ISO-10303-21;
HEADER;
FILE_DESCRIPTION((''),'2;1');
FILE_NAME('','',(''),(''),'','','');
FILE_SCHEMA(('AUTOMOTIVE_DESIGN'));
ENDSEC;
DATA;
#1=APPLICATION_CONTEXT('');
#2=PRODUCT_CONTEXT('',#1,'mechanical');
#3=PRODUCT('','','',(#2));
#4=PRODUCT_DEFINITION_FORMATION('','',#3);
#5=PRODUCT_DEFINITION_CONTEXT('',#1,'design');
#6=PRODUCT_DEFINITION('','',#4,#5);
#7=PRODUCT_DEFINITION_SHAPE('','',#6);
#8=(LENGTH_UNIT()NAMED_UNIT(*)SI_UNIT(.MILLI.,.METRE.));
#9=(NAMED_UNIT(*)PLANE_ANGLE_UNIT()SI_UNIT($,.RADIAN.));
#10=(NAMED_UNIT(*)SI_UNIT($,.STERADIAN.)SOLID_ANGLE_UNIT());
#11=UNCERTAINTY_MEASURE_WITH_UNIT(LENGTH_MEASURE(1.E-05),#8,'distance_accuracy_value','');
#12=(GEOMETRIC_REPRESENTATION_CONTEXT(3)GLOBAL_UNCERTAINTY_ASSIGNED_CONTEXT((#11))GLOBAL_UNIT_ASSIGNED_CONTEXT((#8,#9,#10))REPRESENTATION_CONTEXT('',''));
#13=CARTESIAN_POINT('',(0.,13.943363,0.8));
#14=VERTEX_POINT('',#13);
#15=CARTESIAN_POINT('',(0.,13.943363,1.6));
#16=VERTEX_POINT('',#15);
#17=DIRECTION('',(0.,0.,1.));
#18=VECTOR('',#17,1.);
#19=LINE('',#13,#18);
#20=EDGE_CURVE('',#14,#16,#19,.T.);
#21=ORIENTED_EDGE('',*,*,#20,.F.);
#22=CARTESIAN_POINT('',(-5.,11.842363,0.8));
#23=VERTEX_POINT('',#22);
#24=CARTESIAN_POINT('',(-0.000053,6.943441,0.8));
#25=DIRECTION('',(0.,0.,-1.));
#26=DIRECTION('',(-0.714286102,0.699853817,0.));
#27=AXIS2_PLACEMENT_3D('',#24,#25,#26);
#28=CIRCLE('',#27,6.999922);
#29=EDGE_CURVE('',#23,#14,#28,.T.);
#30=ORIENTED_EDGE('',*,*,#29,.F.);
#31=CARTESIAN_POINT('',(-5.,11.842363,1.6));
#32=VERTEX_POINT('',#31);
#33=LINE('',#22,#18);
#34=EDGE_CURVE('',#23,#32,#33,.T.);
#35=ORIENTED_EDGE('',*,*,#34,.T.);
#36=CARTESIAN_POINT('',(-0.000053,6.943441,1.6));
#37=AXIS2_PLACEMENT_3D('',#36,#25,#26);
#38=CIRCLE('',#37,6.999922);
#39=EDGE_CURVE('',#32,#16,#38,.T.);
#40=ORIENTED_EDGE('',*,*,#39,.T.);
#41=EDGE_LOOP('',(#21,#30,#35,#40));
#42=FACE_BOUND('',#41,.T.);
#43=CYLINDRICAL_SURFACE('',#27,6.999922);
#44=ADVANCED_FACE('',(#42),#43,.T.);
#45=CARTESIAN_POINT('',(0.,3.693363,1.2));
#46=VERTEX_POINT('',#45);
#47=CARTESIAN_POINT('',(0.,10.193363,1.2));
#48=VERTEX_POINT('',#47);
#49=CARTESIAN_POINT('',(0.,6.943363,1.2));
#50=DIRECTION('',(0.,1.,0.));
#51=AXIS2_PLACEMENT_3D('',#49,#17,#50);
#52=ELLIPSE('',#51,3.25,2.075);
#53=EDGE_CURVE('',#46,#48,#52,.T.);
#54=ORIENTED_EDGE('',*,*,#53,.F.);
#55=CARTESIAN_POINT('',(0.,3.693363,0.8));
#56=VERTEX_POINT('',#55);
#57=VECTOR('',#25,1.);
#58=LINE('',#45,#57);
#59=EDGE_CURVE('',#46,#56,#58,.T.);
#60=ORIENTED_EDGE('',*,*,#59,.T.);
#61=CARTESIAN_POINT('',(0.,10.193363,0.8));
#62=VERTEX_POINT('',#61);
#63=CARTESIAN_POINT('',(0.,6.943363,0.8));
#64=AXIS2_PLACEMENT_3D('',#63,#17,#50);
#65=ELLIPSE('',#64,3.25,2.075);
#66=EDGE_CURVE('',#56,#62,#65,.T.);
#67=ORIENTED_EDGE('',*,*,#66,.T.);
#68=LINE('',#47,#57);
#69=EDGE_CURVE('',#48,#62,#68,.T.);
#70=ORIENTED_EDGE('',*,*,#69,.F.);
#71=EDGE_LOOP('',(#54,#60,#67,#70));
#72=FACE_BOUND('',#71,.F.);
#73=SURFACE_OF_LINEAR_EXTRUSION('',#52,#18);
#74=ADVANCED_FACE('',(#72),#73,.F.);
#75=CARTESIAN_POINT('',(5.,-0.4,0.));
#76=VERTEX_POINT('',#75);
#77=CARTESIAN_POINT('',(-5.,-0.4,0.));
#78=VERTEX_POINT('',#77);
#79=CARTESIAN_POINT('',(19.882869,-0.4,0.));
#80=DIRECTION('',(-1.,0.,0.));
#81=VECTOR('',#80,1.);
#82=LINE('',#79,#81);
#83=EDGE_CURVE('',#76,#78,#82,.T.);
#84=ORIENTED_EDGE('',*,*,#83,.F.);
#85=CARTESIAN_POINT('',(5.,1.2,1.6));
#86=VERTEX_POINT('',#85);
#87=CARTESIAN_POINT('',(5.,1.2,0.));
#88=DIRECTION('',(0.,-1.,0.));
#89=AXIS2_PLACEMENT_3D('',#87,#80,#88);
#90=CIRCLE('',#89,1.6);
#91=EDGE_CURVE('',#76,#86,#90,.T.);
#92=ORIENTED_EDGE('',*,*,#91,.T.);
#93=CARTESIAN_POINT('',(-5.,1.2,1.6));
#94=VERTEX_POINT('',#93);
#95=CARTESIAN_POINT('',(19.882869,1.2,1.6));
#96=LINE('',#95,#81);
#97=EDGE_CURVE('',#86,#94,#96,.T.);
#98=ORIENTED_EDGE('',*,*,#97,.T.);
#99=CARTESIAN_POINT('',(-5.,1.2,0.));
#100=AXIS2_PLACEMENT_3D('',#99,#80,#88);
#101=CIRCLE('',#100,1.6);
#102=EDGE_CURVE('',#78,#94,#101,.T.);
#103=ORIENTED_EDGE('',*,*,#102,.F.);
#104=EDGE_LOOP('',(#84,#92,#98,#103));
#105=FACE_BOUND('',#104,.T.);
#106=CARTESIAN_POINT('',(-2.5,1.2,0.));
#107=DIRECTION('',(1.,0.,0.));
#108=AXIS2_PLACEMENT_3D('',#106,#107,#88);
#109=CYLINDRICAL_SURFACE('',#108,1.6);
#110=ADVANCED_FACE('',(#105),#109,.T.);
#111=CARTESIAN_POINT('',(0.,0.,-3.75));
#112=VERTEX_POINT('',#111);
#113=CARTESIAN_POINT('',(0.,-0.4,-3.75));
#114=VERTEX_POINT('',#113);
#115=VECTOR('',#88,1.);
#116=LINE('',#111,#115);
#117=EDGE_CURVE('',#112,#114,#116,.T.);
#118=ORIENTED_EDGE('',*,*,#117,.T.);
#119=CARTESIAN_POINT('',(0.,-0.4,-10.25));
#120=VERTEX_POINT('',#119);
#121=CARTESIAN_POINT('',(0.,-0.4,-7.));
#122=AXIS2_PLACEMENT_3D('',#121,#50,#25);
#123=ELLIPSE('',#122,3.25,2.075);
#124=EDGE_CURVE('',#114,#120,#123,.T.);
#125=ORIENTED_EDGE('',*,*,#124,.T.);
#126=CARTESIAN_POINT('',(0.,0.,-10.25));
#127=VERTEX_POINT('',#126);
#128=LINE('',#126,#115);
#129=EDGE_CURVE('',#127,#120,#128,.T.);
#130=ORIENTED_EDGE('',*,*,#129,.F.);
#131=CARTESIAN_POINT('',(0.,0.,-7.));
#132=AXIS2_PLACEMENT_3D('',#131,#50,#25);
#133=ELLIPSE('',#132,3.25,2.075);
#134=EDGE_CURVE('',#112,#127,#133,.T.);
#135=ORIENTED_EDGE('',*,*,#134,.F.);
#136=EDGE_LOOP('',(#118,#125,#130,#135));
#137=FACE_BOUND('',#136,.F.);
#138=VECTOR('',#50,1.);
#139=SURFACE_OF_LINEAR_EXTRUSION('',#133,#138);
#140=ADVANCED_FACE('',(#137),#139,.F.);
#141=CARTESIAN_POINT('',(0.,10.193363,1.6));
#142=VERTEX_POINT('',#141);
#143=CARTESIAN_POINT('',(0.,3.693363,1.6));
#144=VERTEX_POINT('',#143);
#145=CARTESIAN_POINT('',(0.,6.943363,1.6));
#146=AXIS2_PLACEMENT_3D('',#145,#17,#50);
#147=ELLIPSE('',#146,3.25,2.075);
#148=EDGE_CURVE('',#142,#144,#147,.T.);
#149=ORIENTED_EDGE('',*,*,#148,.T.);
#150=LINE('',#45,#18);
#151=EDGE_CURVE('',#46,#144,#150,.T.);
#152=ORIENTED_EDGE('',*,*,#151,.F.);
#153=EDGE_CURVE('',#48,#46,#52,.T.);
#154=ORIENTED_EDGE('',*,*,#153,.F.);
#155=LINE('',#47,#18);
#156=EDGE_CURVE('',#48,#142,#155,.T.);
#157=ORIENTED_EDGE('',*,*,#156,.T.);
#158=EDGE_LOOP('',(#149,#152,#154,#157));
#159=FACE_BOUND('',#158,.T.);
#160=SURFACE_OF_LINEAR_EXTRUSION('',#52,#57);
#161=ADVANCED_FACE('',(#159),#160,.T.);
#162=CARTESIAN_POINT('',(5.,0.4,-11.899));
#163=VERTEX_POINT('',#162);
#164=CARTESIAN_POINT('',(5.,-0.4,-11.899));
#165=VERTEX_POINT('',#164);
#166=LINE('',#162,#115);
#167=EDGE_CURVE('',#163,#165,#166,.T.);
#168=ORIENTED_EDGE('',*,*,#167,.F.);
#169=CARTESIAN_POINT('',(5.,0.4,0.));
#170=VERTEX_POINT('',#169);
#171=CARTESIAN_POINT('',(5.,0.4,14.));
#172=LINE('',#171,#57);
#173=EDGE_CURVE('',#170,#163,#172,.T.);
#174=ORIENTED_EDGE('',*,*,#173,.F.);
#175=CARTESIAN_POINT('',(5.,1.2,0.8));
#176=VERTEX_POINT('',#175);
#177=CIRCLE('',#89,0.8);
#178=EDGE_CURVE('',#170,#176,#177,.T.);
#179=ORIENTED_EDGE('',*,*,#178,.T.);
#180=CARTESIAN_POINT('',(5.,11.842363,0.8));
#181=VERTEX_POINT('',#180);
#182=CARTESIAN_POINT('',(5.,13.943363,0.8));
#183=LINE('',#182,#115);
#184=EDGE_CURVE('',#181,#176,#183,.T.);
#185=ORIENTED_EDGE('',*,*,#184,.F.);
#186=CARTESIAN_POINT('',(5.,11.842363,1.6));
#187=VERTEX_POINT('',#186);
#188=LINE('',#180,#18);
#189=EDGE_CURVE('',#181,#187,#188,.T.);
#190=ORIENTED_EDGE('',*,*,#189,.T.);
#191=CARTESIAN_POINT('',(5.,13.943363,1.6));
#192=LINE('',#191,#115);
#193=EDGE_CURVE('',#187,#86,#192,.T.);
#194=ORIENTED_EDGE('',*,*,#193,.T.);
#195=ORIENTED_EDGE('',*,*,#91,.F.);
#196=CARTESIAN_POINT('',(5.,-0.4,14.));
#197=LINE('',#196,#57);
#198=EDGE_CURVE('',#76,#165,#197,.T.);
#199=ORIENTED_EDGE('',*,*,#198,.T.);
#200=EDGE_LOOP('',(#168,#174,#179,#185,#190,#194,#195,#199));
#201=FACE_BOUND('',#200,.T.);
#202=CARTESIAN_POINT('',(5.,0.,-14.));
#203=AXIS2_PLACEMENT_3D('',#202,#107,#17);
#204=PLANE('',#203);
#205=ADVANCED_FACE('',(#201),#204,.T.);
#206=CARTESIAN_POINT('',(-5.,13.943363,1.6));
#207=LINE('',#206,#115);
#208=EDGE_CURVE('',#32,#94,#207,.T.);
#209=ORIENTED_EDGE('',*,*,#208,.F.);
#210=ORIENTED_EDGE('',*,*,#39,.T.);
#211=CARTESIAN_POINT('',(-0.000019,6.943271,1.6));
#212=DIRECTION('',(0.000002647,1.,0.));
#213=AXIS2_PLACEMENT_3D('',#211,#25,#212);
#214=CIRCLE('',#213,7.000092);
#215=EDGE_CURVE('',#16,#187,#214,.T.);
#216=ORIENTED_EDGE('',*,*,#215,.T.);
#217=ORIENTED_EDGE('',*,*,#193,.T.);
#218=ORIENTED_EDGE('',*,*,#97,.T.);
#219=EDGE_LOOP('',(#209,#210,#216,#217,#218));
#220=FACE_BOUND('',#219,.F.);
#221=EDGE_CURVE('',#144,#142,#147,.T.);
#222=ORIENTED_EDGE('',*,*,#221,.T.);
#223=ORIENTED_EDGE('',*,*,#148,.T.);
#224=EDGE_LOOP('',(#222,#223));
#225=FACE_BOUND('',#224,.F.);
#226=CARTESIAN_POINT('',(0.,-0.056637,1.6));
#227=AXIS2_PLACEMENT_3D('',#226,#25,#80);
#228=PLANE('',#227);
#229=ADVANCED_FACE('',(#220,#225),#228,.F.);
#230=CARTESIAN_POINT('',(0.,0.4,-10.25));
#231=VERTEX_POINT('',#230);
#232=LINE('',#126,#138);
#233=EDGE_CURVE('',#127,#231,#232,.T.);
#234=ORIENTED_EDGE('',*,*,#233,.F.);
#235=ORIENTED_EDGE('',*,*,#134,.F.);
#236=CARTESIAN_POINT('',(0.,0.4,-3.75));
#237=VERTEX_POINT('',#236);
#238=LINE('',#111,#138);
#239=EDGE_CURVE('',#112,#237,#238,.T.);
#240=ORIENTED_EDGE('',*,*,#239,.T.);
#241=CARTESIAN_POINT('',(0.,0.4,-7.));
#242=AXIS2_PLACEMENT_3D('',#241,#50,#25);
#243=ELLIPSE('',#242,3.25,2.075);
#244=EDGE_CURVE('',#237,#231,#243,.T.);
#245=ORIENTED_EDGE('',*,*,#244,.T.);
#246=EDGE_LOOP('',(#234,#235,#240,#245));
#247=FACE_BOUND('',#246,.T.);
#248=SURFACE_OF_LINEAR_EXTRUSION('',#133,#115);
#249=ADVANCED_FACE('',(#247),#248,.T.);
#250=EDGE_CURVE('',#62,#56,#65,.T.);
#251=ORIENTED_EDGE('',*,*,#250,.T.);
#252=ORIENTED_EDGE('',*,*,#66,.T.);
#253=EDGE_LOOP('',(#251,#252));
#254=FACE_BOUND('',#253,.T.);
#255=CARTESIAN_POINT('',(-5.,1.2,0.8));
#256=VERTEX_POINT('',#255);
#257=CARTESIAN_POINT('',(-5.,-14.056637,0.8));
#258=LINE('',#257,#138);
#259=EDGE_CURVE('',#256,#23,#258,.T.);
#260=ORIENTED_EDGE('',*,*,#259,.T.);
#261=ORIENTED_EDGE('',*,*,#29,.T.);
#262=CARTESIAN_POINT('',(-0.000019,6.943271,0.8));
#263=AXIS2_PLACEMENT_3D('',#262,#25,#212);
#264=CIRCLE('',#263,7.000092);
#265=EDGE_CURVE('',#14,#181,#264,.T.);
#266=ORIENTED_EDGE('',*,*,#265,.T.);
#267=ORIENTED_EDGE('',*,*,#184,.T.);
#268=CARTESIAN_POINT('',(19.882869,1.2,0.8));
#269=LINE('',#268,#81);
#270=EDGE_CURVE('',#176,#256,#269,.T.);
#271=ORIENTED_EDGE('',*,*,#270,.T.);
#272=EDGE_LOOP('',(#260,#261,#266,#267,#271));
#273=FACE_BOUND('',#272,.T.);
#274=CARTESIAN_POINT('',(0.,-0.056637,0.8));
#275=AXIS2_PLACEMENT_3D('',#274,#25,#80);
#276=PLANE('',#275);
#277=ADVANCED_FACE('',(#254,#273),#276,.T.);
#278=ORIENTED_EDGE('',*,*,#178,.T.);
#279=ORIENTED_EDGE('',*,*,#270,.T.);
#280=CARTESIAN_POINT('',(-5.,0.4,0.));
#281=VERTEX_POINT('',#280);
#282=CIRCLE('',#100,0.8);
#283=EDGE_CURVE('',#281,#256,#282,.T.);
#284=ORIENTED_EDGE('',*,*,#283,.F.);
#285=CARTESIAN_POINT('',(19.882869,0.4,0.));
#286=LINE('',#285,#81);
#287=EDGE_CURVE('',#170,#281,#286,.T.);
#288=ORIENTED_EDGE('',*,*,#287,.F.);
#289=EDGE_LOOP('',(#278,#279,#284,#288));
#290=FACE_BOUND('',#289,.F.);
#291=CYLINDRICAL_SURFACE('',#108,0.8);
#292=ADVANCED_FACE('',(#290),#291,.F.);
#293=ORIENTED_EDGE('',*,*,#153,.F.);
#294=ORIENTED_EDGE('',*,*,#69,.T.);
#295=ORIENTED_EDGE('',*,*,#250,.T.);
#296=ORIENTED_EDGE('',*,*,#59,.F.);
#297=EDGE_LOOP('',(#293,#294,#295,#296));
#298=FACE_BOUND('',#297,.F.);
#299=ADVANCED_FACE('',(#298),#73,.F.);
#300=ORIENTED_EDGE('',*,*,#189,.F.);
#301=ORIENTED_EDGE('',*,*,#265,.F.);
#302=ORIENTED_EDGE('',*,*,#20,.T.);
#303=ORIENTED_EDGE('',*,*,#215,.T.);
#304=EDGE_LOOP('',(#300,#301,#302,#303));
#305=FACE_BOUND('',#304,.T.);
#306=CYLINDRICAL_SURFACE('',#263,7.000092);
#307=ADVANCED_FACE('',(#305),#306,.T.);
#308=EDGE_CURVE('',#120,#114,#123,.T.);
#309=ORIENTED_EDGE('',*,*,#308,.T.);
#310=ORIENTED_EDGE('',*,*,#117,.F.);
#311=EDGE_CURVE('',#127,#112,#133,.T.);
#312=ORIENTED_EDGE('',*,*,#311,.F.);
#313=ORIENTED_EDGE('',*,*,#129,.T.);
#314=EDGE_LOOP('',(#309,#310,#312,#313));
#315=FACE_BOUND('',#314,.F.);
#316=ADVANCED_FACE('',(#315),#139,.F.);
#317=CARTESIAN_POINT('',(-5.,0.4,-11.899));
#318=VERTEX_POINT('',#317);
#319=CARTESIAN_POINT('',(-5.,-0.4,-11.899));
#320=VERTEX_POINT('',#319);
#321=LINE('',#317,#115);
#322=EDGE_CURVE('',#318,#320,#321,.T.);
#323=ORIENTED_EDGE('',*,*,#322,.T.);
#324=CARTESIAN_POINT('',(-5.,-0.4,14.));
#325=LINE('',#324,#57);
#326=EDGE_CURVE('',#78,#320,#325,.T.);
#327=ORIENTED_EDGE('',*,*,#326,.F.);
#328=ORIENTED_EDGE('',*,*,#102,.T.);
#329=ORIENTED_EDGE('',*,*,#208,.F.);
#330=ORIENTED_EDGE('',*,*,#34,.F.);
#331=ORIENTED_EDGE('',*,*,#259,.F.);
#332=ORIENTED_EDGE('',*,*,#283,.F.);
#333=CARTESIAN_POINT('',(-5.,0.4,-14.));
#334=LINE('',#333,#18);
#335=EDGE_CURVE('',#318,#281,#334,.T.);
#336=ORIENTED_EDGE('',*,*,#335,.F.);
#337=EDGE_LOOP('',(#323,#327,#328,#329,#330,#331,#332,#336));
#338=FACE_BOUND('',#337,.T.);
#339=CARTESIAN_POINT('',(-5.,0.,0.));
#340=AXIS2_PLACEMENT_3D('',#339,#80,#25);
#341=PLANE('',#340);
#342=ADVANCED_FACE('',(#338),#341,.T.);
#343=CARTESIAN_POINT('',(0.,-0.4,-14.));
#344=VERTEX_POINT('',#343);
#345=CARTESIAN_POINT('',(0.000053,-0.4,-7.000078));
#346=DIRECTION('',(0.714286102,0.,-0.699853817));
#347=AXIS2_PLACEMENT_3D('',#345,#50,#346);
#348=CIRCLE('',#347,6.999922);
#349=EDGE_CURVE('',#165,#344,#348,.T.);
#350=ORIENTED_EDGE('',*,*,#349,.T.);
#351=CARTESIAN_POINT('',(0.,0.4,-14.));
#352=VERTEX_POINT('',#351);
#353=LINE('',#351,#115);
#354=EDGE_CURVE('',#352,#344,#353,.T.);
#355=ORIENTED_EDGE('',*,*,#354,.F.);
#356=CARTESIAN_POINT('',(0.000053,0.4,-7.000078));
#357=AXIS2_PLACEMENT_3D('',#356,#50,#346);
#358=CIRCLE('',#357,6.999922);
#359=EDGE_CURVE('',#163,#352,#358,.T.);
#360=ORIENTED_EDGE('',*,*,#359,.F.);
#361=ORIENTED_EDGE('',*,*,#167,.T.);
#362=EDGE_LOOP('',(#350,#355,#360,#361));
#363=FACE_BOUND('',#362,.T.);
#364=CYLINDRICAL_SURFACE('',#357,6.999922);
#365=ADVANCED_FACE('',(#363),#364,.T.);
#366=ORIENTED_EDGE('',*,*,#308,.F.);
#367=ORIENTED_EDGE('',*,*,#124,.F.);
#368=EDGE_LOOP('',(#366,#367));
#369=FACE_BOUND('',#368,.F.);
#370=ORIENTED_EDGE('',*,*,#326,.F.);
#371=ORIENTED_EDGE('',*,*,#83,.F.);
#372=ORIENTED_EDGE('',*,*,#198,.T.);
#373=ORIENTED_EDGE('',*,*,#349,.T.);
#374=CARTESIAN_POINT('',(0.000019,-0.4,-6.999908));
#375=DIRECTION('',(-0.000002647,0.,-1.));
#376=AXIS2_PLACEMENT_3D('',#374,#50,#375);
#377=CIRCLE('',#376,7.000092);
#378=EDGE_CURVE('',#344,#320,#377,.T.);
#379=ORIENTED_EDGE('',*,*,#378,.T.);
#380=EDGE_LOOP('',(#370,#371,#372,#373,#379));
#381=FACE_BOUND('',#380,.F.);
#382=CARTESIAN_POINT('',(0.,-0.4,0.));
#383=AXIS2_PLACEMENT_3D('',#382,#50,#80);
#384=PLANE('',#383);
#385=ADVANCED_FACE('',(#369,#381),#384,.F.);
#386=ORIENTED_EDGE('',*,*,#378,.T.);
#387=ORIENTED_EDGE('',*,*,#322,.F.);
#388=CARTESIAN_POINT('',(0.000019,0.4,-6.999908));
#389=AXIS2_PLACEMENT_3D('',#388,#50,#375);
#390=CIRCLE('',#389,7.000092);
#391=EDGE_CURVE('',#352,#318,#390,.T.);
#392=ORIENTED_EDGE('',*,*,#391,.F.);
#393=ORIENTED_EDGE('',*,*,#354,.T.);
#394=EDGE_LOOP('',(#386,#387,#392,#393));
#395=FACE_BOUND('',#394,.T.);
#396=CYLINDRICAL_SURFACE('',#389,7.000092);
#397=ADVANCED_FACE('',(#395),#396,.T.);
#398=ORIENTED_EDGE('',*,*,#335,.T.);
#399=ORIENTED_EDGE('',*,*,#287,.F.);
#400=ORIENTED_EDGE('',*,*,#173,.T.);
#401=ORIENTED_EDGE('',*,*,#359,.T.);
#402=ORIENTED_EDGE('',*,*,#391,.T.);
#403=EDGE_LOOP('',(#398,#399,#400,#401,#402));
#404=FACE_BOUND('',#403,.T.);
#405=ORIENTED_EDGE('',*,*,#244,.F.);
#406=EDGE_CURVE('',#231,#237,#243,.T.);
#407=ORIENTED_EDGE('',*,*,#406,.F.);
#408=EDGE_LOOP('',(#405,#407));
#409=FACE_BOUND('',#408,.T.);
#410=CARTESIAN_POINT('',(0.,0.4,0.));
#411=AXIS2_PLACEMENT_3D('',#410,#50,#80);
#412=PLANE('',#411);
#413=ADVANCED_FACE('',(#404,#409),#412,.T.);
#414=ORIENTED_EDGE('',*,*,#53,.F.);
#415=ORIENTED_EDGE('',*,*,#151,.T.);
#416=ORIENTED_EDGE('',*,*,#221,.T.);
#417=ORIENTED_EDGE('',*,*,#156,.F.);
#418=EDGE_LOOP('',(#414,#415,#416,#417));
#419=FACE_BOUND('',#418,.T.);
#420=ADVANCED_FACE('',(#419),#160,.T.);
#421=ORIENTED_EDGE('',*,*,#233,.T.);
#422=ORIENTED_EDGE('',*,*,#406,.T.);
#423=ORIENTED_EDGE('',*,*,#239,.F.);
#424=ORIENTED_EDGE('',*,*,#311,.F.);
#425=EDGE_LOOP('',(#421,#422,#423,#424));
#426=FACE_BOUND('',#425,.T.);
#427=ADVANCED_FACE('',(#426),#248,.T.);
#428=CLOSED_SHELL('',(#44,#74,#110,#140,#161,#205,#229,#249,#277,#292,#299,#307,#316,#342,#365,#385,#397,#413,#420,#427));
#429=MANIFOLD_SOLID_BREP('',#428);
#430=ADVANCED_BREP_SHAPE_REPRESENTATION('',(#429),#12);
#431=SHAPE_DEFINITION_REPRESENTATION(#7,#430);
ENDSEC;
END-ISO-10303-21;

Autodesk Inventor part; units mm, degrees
ref_plane "YZ Plane" through (0, 0, 0) normal (1, 0, 0) x (0, 1, 0)
ref_plane "XZ Plane" through (0, 0, 0) normal (0, 1, 0) x (-1, 0, 0)
ref_plane "XY Plane" through (0, 0, 0) normal (0, 0, 1) x (1, 0, 0)
sketch "Эскиз1" plane through (0, 0, 0) normal (0, 1, 0) x (-1, 0, 0)
  line L0 (5, -14) -> (-5, -14)
  line L1 (-5, -14) -> (-5, 0)
  line L2 (-5, 0) -> (5, 0)
  line L3 (5, 0) -> (5, -14)
  line L4 (0, -10.25) -> (0, -3.75)
  line L5 (0, -14) -> (0, 0) construction
  ellipse E0 centre (0, -7) end of major axis (-2.075, -7) minor radius 3.25
  dimension "d5" = 2.075
  dimension "d0" = 14
  dimension "d1" = 10
  dimension "d4" = 6.5
extrude "Выдавливание1" add sketch "Эскиз1" along normal mid plane 0.8
mirror "Зеркальное отражение1" about plane through (0, 0, 0) normal (0, 0, 1) of "Выдавливание1"
sketch "Эскиз2" plane through (0, 0.4, 0) normal (0, 1, 0) x (1, 0, 0)
  point P0 (0, 0)
sketch "Эскиз3" plane through (0, 0.4, 0) normal (0, 1, 0) x (1, 0, 0)
  ellipse E0 centre (0, 7) end of major axis (0, 10.25) minor radius 2.075 projected
  line L0 (5, 14) -> (-5, 14) projected
  arc A0 (5, 11.899) -> (0, 14) centre (0, 7) ccw
  arc A1 (0, 14) -> (-5, 11.899) centre (0, 7) ccw
  line L1 (5, 14) -> (5, -14) projected
  line L2 (-5, 14) -> (-5, -14) projected
  line L3 (2.799, 0) -> (-2.799, 0) construction
  arc A2 (0, -14) -> (5, -11.899) centre (0, -7) ccw
  arc A3 (-5, -11.899) -> (0, -14) centre (0, -7) ccw
  line L4 (5, -14) -> (-5, -14) projected
  point P0 (0, 0)
  point P1 (0, 0)
  point P2 (5, -11.899)
extrude "Выдавливание2" cut sketch "Эскиз3" against normal up to surface (0.8 mm away) contours L1 A0 L0 | A1 L2 L0 | L1 L4 A2 | A3 L4 L2
sketch "Эскиз5" plane through (0, 0.4, 0) normal (0, 1, 0) x (1, 0, 0)
  line L0 (-5, 11.899) -> (-5, -11.899) projected
  line L1 (-5, 0) -> (5, 0)
  line L2 (5, 11.899) -> (5, -11.899) projected
  point P0 (0, 0)
bend part "Сгиб детали1" radius 0.8 angle 90 line through (-5, 0.4, 0) along (1, 0, 0) centre toward (0, 1, 0) moving side (0, 0, 1) both sides no
equation "\"Радиус_гибки\" = Толщина"
equation "\"Ширина_просечки\" = Толщина"
equation "\"Глубина_просечки\" = 0.5 * Толщина"
equation "\"Размер_просечки\" = 4 * Толщина"
equation "\"Мин_остаток\" = 2 * Толщина"
equation "\"Радиус_перехода\" = Радиус_гибки"
equation "\"Радиус_Якоби\" = Радиус_гибки"
equation "\"Размер_зазора\" = Толщина"
equation "\"Толщина\" = 0.8"
properties part number "Уголок"
